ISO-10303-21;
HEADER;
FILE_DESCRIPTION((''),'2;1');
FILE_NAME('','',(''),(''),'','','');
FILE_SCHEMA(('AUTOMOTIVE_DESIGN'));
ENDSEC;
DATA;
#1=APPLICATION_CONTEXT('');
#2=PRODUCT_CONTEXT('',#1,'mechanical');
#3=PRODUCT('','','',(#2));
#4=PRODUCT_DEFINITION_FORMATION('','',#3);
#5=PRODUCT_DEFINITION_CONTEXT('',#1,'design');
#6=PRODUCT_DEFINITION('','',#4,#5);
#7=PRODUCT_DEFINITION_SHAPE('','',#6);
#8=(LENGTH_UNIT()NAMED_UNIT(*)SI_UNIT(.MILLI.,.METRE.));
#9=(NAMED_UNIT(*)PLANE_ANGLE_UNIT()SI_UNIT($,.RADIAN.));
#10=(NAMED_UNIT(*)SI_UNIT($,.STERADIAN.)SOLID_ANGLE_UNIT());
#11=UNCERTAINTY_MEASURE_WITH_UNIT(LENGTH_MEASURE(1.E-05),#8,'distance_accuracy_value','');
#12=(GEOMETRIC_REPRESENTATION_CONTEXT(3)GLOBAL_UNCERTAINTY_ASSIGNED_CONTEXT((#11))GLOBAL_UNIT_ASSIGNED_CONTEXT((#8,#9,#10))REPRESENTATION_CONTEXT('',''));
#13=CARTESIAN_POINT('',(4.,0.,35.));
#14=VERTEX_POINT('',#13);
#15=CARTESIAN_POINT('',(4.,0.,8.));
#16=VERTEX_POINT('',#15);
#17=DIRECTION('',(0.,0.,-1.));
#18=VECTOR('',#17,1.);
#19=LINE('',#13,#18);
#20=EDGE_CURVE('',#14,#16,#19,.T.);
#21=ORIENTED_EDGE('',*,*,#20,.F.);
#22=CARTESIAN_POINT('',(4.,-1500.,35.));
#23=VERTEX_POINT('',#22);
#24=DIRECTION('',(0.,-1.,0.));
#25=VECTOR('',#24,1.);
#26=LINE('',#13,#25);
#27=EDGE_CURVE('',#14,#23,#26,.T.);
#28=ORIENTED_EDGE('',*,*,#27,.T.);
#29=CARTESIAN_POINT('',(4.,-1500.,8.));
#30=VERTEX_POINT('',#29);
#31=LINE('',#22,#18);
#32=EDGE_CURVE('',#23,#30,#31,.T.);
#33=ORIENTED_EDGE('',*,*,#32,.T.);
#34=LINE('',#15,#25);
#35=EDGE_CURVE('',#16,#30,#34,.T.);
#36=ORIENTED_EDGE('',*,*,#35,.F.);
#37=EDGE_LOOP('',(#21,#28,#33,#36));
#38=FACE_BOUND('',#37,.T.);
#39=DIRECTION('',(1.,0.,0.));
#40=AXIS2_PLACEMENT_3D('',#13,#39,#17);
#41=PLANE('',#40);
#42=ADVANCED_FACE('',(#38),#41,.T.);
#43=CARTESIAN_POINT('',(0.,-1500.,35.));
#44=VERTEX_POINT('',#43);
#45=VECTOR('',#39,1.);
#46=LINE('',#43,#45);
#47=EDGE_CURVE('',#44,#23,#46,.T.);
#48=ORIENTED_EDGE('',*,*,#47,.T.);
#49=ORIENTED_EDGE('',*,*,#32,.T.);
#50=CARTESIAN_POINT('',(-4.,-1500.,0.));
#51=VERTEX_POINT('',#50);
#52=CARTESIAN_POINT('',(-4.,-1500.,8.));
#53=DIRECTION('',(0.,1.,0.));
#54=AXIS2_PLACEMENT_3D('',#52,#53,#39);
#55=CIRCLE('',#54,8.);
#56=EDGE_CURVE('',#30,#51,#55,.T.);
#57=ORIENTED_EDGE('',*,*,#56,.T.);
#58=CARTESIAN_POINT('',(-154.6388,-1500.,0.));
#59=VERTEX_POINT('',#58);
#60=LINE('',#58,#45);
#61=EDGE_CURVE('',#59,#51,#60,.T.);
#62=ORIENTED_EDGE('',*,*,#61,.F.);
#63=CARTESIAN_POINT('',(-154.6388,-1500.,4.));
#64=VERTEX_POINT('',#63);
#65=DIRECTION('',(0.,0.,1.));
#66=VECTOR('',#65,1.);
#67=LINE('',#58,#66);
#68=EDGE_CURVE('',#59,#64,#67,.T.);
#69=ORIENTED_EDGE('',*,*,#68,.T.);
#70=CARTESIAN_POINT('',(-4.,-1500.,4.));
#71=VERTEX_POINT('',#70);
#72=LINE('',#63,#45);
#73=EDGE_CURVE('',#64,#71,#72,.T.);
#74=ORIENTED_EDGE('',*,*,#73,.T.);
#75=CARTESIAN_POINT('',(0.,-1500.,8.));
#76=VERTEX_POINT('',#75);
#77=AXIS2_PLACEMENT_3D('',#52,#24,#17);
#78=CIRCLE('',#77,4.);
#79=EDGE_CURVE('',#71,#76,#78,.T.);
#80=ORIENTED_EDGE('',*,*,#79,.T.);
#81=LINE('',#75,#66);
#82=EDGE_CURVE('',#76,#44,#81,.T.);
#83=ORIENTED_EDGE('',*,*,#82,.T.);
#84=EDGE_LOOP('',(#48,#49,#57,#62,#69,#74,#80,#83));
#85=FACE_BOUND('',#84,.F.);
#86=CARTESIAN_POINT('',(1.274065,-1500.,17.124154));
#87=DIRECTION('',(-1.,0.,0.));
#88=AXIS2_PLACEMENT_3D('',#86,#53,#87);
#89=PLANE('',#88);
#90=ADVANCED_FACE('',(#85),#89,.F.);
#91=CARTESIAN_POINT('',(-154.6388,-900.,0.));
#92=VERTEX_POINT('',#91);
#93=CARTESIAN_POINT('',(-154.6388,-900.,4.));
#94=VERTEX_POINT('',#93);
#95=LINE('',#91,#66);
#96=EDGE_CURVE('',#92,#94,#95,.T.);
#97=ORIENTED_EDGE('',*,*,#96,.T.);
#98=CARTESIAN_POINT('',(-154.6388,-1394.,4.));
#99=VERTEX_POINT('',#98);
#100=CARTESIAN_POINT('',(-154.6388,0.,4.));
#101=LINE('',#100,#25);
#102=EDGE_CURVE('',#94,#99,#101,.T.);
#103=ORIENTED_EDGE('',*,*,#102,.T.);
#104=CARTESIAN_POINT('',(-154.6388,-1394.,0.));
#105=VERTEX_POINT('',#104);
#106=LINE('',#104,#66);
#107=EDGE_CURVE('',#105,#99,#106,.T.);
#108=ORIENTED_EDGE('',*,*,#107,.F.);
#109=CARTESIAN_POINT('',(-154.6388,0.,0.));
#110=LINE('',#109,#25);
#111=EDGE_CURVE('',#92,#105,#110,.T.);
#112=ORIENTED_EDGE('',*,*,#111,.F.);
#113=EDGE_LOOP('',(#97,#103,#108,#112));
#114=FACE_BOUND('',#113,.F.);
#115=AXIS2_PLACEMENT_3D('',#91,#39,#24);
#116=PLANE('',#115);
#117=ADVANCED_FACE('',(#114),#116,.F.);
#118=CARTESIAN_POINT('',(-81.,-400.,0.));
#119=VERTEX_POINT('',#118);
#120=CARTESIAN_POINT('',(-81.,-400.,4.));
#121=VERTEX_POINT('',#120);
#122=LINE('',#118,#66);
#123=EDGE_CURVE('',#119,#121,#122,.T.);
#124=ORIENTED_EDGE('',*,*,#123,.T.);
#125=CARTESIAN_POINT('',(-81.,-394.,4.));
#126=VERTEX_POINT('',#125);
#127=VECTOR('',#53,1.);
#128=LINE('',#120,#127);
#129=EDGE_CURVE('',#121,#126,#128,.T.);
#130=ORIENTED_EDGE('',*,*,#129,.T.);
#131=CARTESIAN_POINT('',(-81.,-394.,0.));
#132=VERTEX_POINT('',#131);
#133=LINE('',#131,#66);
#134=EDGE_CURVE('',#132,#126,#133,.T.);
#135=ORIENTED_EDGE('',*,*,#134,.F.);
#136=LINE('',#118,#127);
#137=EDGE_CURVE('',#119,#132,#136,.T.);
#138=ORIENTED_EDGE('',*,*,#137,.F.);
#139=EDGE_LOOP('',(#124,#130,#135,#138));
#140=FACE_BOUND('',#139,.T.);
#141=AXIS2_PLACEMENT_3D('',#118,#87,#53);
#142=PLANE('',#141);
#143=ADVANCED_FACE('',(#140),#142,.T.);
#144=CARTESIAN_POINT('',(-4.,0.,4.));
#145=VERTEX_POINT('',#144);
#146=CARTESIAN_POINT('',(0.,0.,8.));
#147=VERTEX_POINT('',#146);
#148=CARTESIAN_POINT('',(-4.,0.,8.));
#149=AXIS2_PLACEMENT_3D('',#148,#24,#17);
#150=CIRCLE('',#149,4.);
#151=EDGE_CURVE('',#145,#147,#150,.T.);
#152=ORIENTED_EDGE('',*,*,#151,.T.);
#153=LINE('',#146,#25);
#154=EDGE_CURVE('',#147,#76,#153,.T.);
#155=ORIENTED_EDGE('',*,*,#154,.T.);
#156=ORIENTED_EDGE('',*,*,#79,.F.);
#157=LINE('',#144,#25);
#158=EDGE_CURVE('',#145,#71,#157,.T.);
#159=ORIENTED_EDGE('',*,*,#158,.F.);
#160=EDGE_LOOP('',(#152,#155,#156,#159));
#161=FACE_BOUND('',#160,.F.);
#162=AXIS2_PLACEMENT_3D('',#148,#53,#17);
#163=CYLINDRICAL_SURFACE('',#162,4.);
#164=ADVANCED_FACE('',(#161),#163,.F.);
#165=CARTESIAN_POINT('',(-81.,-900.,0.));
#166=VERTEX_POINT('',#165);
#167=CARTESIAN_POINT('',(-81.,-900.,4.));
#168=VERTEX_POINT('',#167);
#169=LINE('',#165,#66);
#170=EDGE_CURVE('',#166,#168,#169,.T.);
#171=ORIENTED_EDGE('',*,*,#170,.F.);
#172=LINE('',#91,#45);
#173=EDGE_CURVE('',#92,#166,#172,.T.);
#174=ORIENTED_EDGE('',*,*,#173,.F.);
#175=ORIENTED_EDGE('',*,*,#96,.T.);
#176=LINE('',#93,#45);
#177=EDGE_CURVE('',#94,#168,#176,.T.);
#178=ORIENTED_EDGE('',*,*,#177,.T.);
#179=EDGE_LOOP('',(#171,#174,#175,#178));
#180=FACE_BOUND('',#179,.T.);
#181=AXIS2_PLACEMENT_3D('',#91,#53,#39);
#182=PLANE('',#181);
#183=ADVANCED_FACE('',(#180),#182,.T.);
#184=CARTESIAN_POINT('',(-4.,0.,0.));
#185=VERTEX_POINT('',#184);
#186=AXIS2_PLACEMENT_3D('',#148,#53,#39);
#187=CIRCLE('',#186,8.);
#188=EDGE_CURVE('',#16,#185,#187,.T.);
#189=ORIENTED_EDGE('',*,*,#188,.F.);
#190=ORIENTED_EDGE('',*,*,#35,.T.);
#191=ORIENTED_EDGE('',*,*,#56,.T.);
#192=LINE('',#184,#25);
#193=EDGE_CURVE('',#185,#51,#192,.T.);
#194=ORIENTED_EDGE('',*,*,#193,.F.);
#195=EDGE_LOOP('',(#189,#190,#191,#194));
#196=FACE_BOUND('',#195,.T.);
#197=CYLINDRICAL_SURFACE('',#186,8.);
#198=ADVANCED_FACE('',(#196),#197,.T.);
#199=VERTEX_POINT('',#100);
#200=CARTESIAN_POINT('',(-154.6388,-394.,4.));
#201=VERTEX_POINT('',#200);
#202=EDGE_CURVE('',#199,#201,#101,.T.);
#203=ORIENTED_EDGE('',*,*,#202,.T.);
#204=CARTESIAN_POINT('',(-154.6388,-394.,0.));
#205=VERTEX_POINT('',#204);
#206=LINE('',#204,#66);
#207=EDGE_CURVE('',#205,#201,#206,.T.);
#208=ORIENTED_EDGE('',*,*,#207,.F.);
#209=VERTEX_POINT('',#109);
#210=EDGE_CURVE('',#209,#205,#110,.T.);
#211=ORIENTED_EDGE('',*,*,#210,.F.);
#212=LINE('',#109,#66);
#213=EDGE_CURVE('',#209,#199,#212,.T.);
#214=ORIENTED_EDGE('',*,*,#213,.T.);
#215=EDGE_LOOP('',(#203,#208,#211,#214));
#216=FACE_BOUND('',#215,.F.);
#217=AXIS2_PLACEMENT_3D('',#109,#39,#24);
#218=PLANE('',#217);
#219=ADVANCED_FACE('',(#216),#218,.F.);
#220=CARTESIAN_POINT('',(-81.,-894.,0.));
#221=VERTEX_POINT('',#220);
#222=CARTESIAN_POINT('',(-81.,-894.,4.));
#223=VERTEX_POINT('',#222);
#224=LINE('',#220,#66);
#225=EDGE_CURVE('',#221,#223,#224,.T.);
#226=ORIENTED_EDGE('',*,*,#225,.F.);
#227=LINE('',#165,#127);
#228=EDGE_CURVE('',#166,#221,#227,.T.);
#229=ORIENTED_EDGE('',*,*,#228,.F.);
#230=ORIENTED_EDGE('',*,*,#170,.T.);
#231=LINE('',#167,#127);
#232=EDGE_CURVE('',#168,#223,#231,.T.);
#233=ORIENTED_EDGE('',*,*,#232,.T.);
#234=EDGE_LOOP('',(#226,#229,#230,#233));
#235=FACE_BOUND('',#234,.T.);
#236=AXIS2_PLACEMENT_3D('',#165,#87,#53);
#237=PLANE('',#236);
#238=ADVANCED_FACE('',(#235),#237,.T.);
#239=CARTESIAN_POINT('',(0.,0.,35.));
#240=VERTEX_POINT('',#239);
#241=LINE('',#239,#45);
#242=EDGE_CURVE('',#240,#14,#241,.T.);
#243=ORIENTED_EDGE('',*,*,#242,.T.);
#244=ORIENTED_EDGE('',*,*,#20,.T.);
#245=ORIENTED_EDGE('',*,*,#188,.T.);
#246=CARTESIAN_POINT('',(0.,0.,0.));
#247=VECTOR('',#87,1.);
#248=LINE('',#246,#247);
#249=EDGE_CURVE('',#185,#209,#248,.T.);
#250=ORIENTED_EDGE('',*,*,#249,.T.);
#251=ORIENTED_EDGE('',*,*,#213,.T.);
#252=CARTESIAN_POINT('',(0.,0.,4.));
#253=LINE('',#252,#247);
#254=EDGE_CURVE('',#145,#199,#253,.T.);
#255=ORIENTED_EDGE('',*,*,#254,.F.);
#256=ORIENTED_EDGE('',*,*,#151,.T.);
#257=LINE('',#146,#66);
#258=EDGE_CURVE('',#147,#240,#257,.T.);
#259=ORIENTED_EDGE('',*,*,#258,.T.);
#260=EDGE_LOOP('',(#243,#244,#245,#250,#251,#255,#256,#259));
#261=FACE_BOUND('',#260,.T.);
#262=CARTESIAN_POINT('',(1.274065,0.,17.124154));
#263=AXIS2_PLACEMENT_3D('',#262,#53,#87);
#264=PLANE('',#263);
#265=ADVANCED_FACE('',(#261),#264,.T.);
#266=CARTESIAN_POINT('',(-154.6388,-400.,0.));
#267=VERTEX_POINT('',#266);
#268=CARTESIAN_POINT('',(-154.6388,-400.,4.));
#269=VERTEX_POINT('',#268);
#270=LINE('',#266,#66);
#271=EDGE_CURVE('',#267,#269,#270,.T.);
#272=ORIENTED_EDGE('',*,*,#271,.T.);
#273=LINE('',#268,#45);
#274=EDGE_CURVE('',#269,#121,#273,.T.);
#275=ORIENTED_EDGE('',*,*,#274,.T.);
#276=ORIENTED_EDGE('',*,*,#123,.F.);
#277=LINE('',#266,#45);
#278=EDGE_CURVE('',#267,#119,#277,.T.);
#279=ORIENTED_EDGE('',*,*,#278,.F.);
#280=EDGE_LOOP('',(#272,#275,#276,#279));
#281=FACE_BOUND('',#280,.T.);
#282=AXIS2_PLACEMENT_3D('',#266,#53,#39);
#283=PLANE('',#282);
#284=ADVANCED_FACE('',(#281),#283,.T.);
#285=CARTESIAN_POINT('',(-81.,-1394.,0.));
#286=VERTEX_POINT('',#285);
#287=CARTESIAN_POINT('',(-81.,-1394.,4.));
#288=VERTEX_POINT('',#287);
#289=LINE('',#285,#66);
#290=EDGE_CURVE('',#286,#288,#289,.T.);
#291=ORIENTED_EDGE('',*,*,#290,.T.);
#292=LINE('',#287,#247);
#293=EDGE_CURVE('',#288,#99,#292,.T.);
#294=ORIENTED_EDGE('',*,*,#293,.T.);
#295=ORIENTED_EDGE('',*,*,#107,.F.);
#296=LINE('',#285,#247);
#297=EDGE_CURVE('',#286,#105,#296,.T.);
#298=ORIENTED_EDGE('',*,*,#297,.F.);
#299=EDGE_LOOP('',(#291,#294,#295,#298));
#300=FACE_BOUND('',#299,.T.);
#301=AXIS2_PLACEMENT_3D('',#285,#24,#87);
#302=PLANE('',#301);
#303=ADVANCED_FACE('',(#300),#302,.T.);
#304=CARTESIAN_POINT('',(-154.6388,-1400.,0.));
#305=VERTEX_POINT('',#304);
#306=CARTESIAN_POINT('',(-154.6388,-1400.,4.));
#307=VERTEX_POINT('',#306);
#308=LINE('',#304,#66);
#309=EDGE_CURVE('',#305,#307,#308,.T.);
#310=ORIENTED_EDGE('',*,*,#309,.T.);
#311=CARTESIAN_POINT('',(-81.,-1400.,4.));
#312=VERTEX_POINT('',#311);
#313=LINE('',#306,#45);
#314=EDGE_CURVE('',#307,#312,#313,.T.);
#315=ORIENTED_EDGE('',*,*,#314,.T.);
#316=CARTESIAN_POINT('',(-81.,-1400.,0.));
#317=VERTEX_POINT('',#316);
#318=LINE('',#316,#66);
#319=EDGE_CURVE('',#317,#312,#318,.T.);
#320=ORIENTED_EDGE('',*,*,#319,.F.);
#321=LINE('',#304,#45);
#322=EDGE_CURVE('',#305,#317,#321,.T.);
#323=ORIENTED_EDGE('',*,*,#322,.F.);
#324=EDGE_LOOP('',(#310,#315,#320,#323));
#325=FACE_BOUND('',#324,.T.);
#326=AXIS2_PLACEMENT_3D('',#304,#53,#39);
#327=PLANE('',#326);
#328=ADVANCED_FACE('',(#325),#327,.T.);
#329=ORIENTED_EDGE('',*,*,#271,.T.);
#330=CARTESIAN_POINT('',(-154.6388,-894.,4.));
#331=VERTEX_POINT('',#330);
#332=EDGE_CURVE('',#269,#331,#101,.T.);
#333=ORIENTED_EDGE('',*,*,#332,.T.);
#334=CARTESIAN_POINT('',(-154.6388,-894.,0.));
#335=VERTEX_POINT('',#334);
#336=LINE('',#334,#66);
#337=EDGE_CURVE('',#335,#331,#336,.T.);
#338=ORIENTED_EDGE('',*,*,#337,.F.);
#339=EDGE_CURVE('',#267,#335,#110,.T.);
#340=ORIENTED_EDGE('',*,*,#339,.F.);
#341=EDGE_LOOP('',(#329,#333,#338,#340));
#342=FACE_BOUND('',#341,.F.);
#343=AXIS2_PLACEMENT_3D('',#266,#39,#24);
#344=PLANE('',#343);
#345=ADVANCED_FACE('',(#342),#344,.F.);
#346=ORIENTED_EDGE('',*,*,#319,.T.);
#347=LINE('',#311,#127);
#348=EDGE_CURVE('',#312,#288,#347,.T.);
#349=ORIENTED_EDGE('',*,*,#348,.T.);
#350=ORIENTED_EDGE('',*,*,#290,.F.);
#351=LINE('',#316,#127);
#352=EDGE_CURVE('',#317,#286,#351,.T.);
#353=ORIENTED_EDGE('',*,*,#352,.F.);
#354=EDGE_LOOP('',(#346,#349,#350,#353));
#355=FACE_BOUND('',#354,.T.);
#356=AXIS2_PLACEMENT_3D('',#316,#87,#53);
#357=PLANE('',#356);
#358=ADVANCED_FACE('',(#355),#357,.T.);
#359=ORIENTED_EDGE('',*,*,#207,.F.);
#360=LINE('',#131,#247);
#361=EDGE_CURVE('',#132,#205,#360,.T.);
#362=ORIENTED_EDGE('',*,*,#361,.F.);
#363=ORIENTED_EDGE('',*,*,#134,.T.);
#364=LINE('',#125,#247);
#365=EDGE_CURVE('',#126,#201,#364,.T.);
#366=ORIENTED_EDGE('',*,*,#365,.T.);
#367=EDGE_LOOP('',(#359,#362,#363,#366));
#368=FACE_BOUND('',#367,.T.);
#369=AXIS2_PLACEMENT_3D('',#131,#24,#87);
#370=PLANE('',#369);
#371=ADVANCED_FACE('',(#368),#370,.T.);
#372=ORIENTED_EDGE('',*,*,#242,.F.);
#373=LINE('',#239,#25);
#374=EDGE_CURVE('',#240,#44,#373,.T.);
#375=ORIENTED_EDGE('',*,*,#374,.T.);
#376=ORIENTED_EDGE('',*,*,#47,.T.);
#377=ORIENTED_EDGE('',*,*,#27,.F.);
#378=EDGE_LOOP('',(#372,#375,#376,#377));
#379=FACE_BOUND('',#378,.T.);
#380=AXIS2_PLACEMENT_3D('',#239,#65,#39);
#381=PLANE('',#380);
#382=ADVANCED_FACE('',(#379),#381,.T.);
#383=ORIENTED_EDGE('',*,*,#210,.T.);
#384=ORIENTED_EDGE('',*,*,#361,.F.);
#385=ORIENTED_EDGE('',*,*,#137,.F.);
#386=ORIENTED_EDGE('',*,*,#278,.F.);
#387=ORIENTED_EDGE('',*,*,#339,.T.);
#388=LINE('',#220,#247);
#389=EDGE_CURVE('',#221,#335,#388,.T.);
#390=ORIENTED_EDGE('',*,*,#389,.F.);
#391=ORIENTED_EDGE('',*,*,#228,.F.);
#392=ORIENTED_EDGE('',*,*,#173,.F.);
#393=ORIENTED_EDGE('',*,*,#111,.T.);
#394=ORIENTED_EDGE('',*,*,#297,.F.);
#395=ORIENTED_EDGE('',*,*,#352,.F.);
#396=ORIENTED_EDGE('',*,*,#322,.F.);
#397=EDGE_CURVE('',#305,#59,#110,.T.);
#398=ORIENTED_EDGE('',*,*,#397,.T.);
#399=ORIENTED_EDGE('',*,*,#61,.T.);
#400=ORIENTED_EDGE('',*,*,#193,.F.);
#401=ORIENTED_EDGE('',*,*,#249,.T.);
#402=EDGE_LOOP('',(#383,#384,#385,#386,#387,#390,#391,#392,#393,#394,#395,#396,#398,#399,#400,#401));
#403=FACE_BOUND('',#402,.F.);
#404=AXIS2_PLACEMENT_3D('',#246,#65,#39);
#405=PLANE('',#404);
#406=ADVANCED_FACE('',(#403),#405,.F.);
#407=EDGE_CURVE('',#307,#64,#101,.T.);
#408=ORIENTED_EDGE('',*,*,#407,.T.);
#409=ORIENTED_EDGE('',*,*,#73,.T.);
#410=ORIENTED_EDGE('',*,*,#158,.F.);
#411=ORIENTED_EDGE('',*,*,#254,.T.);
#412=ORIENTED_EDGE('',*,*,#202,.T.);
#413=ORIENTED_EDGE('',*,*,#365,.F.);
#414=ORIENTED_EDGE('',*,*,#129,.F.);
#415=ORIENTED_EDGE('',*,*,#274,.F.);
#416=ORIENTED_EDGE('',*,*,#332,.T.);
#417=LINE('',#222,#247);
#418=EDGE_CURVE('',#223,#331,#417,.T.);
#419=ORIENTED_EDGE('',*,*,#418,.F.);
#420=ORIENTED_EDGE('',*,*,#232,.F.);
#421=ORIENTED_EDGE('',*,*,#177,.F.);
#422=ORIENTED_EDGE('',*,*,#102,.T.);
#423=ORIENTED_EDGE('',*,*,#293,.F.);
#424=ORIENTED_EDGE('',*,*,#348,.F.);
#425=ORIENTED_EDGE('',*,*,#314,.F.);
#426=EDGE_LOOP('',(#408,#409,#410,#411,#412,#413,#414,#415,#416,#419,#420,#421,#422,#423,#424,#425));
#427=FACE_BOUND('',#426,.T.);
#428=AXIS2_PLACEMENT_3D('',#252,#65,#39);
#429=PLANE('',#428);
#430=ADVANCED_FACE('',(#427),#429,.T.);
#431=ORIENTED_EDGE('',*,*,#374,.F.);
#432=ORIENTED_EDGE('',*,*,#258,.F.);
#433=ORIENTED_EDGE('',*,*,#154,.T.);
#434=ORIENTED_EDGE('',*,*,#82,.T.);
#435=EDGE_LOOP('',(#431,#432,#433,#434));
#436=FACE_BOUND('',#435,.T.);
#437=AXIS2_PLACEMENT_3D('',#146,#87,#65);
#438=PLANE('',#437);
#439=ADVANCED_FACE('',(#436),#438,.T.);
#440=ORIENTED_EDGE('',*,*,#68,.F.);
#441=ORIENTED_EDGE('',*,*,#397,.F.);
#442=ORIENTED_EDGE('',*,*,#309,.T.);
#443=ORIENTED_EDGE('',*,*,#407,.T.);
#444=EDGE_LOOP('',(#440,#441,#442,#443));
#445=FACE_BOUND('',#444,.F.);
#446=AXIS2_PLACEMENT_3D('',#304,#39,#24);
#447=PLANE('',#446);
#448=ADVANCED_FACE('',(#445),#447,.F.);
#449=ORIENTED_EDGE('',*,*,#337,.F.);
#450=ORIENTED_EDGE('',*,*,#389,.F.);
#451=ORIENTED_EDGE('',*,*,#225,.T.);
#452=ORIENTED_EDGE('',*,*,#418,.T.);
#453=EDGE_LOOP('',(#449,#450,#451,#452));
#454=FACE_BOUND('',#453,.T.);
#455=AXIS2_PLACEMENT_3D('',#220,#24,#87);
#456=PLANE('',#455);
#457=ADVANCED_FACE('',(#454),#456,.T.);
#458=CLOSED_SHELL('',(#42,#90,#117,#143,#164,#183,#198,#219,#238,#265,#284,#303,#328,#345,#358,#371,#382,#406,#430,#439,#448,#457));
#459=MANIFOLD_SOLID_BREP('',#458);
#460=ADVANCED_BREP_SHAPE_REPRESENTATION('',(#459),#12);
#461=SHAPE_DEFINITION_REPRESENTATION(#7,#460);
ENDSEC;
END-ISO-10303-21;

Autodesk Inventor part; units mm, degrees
ref_plane "YZ Plane" through (0, 0, 0) normal (1, 0, 0) x (0, 1, 0)
ref_plane "XZ Plane" through (0, 0, 0) normal (0, 1, 0) x (-1, 0, 0)
ref_plane "XY Plane" through (0, 0, 0) normal (0, 0, 1) x (1, 0, 0)
sketch "Sketch1" plane through (0, 0, 0) normal (0, 0, 1) x (1, 0, 0)
  line L0 (0, 0) -> (-154.6388, 0)
  line L1 (-154.6388, 0) -> (-154.6388, -1500)
  line L2 (-154.6388, -1500) -> (0, -1500)
  line L3 (0, -1500) -> (0, 0)
  line L4 (-154.6388, -1400) -> (-81, -1400)
  line L5 (-81, -1400) -> (-81, -1394)
  line L6 (-81, -1394) -> (-154.6388, -1394)
  line L7 (-154.6388, -1394) -> (-154.6388, -1400)
  line L8 (-154.6388, -900) -> (-81, -900)
  line L9 (-81, -900) -> (-81, -894)
  line L10 (-81, -894) -> (-154.6388, -894)
  line L11 (-154.6388, -894) -> (-154.6388, -900)
  line L12 (-154.6388, -400) -> (-81, -400)
  line L13 (-81, -400) -> (-81, -394)
  line L14 (-81, -394) -> (-154.6388, -394)
  line L15 (-154.6388, -394) -> (-154.6388, -400)
  point P0 (-154.6388, -900)
  point P1 (-154.6388, -1394)
  dimension "d0" = 1500
  dimension "d1" = 154.6388
  dimension "d2" = 6
  dimension "d4" = 100
  dimension "d7" = 500
  dimension "d23" = 81
extrude "Plate1" add sketch "Sketch1" along normal blind 4 contours L3 L2 L1 L4 L5 L6 L8 L9 L10 L12 L13 L14 L0
sketch "Sketch2" plane through (4, 0, 0) normal (-1, 0, 0) x (0, -1, 0)
  line L0 (1500, 0) -> (0, 0)
  line L1 (0, 0) -> (0, 35)
  line L2 (0, 35) -> (1500, 35)
  line L3 (1500, 35) -> (1500, 0)
edge flange "Flange1" height 35 angle 90 thickness 4 bend radius 4 thickness toward (-1, 0, 0) relief tear relief width 4 relief depth 2 edges at (0, -750, 4) wall of the first edge with corners at (4, -1500, 0) (4, 0, 0) (4, 0, 35) (4, -1500, 35)
bend "Bend1"
corner "Corner1"
equation "\"d1\" = Stringer2_2_deep"
equation "\"d12\" = Thickness"
equation "\"d13\" = BendReliefWidth"
equation "\"d14\" = BendReliefDepth"
equation "\"d15\" = MinimumRemnant"
equation "\"d16\" = TransitionRadius"
equation "\"d19\" = BendRadius"
equation "\"d20\" = CornerReliefSize"
equation "\"d21\" = GapSize"
equation "\"d22\" = JacobiRadiusSize"
equation "\"BendRadius\" = Thickness"
equation "\"BendReliefWidth\" = Thickness"
equation "\"BendReliefDepth\" = 0.5 * Thickness"
equation "\"CornerReliefSize\" = 4 * Thickness"
equation "\"MinimumRemnant\" = 2 * Thickness"
equation "\"TransitionRadius\" = BendRadius"
equation "\"JacobiRadiusSize\" = BendRadius"
equation "\"GapSize\" = Thickness"
equation "\"Stringer2_2_deep\" = 154.638781"
equation "\"Thickness\" = 4"
properties part number "stringer 1.2_CPY2"
